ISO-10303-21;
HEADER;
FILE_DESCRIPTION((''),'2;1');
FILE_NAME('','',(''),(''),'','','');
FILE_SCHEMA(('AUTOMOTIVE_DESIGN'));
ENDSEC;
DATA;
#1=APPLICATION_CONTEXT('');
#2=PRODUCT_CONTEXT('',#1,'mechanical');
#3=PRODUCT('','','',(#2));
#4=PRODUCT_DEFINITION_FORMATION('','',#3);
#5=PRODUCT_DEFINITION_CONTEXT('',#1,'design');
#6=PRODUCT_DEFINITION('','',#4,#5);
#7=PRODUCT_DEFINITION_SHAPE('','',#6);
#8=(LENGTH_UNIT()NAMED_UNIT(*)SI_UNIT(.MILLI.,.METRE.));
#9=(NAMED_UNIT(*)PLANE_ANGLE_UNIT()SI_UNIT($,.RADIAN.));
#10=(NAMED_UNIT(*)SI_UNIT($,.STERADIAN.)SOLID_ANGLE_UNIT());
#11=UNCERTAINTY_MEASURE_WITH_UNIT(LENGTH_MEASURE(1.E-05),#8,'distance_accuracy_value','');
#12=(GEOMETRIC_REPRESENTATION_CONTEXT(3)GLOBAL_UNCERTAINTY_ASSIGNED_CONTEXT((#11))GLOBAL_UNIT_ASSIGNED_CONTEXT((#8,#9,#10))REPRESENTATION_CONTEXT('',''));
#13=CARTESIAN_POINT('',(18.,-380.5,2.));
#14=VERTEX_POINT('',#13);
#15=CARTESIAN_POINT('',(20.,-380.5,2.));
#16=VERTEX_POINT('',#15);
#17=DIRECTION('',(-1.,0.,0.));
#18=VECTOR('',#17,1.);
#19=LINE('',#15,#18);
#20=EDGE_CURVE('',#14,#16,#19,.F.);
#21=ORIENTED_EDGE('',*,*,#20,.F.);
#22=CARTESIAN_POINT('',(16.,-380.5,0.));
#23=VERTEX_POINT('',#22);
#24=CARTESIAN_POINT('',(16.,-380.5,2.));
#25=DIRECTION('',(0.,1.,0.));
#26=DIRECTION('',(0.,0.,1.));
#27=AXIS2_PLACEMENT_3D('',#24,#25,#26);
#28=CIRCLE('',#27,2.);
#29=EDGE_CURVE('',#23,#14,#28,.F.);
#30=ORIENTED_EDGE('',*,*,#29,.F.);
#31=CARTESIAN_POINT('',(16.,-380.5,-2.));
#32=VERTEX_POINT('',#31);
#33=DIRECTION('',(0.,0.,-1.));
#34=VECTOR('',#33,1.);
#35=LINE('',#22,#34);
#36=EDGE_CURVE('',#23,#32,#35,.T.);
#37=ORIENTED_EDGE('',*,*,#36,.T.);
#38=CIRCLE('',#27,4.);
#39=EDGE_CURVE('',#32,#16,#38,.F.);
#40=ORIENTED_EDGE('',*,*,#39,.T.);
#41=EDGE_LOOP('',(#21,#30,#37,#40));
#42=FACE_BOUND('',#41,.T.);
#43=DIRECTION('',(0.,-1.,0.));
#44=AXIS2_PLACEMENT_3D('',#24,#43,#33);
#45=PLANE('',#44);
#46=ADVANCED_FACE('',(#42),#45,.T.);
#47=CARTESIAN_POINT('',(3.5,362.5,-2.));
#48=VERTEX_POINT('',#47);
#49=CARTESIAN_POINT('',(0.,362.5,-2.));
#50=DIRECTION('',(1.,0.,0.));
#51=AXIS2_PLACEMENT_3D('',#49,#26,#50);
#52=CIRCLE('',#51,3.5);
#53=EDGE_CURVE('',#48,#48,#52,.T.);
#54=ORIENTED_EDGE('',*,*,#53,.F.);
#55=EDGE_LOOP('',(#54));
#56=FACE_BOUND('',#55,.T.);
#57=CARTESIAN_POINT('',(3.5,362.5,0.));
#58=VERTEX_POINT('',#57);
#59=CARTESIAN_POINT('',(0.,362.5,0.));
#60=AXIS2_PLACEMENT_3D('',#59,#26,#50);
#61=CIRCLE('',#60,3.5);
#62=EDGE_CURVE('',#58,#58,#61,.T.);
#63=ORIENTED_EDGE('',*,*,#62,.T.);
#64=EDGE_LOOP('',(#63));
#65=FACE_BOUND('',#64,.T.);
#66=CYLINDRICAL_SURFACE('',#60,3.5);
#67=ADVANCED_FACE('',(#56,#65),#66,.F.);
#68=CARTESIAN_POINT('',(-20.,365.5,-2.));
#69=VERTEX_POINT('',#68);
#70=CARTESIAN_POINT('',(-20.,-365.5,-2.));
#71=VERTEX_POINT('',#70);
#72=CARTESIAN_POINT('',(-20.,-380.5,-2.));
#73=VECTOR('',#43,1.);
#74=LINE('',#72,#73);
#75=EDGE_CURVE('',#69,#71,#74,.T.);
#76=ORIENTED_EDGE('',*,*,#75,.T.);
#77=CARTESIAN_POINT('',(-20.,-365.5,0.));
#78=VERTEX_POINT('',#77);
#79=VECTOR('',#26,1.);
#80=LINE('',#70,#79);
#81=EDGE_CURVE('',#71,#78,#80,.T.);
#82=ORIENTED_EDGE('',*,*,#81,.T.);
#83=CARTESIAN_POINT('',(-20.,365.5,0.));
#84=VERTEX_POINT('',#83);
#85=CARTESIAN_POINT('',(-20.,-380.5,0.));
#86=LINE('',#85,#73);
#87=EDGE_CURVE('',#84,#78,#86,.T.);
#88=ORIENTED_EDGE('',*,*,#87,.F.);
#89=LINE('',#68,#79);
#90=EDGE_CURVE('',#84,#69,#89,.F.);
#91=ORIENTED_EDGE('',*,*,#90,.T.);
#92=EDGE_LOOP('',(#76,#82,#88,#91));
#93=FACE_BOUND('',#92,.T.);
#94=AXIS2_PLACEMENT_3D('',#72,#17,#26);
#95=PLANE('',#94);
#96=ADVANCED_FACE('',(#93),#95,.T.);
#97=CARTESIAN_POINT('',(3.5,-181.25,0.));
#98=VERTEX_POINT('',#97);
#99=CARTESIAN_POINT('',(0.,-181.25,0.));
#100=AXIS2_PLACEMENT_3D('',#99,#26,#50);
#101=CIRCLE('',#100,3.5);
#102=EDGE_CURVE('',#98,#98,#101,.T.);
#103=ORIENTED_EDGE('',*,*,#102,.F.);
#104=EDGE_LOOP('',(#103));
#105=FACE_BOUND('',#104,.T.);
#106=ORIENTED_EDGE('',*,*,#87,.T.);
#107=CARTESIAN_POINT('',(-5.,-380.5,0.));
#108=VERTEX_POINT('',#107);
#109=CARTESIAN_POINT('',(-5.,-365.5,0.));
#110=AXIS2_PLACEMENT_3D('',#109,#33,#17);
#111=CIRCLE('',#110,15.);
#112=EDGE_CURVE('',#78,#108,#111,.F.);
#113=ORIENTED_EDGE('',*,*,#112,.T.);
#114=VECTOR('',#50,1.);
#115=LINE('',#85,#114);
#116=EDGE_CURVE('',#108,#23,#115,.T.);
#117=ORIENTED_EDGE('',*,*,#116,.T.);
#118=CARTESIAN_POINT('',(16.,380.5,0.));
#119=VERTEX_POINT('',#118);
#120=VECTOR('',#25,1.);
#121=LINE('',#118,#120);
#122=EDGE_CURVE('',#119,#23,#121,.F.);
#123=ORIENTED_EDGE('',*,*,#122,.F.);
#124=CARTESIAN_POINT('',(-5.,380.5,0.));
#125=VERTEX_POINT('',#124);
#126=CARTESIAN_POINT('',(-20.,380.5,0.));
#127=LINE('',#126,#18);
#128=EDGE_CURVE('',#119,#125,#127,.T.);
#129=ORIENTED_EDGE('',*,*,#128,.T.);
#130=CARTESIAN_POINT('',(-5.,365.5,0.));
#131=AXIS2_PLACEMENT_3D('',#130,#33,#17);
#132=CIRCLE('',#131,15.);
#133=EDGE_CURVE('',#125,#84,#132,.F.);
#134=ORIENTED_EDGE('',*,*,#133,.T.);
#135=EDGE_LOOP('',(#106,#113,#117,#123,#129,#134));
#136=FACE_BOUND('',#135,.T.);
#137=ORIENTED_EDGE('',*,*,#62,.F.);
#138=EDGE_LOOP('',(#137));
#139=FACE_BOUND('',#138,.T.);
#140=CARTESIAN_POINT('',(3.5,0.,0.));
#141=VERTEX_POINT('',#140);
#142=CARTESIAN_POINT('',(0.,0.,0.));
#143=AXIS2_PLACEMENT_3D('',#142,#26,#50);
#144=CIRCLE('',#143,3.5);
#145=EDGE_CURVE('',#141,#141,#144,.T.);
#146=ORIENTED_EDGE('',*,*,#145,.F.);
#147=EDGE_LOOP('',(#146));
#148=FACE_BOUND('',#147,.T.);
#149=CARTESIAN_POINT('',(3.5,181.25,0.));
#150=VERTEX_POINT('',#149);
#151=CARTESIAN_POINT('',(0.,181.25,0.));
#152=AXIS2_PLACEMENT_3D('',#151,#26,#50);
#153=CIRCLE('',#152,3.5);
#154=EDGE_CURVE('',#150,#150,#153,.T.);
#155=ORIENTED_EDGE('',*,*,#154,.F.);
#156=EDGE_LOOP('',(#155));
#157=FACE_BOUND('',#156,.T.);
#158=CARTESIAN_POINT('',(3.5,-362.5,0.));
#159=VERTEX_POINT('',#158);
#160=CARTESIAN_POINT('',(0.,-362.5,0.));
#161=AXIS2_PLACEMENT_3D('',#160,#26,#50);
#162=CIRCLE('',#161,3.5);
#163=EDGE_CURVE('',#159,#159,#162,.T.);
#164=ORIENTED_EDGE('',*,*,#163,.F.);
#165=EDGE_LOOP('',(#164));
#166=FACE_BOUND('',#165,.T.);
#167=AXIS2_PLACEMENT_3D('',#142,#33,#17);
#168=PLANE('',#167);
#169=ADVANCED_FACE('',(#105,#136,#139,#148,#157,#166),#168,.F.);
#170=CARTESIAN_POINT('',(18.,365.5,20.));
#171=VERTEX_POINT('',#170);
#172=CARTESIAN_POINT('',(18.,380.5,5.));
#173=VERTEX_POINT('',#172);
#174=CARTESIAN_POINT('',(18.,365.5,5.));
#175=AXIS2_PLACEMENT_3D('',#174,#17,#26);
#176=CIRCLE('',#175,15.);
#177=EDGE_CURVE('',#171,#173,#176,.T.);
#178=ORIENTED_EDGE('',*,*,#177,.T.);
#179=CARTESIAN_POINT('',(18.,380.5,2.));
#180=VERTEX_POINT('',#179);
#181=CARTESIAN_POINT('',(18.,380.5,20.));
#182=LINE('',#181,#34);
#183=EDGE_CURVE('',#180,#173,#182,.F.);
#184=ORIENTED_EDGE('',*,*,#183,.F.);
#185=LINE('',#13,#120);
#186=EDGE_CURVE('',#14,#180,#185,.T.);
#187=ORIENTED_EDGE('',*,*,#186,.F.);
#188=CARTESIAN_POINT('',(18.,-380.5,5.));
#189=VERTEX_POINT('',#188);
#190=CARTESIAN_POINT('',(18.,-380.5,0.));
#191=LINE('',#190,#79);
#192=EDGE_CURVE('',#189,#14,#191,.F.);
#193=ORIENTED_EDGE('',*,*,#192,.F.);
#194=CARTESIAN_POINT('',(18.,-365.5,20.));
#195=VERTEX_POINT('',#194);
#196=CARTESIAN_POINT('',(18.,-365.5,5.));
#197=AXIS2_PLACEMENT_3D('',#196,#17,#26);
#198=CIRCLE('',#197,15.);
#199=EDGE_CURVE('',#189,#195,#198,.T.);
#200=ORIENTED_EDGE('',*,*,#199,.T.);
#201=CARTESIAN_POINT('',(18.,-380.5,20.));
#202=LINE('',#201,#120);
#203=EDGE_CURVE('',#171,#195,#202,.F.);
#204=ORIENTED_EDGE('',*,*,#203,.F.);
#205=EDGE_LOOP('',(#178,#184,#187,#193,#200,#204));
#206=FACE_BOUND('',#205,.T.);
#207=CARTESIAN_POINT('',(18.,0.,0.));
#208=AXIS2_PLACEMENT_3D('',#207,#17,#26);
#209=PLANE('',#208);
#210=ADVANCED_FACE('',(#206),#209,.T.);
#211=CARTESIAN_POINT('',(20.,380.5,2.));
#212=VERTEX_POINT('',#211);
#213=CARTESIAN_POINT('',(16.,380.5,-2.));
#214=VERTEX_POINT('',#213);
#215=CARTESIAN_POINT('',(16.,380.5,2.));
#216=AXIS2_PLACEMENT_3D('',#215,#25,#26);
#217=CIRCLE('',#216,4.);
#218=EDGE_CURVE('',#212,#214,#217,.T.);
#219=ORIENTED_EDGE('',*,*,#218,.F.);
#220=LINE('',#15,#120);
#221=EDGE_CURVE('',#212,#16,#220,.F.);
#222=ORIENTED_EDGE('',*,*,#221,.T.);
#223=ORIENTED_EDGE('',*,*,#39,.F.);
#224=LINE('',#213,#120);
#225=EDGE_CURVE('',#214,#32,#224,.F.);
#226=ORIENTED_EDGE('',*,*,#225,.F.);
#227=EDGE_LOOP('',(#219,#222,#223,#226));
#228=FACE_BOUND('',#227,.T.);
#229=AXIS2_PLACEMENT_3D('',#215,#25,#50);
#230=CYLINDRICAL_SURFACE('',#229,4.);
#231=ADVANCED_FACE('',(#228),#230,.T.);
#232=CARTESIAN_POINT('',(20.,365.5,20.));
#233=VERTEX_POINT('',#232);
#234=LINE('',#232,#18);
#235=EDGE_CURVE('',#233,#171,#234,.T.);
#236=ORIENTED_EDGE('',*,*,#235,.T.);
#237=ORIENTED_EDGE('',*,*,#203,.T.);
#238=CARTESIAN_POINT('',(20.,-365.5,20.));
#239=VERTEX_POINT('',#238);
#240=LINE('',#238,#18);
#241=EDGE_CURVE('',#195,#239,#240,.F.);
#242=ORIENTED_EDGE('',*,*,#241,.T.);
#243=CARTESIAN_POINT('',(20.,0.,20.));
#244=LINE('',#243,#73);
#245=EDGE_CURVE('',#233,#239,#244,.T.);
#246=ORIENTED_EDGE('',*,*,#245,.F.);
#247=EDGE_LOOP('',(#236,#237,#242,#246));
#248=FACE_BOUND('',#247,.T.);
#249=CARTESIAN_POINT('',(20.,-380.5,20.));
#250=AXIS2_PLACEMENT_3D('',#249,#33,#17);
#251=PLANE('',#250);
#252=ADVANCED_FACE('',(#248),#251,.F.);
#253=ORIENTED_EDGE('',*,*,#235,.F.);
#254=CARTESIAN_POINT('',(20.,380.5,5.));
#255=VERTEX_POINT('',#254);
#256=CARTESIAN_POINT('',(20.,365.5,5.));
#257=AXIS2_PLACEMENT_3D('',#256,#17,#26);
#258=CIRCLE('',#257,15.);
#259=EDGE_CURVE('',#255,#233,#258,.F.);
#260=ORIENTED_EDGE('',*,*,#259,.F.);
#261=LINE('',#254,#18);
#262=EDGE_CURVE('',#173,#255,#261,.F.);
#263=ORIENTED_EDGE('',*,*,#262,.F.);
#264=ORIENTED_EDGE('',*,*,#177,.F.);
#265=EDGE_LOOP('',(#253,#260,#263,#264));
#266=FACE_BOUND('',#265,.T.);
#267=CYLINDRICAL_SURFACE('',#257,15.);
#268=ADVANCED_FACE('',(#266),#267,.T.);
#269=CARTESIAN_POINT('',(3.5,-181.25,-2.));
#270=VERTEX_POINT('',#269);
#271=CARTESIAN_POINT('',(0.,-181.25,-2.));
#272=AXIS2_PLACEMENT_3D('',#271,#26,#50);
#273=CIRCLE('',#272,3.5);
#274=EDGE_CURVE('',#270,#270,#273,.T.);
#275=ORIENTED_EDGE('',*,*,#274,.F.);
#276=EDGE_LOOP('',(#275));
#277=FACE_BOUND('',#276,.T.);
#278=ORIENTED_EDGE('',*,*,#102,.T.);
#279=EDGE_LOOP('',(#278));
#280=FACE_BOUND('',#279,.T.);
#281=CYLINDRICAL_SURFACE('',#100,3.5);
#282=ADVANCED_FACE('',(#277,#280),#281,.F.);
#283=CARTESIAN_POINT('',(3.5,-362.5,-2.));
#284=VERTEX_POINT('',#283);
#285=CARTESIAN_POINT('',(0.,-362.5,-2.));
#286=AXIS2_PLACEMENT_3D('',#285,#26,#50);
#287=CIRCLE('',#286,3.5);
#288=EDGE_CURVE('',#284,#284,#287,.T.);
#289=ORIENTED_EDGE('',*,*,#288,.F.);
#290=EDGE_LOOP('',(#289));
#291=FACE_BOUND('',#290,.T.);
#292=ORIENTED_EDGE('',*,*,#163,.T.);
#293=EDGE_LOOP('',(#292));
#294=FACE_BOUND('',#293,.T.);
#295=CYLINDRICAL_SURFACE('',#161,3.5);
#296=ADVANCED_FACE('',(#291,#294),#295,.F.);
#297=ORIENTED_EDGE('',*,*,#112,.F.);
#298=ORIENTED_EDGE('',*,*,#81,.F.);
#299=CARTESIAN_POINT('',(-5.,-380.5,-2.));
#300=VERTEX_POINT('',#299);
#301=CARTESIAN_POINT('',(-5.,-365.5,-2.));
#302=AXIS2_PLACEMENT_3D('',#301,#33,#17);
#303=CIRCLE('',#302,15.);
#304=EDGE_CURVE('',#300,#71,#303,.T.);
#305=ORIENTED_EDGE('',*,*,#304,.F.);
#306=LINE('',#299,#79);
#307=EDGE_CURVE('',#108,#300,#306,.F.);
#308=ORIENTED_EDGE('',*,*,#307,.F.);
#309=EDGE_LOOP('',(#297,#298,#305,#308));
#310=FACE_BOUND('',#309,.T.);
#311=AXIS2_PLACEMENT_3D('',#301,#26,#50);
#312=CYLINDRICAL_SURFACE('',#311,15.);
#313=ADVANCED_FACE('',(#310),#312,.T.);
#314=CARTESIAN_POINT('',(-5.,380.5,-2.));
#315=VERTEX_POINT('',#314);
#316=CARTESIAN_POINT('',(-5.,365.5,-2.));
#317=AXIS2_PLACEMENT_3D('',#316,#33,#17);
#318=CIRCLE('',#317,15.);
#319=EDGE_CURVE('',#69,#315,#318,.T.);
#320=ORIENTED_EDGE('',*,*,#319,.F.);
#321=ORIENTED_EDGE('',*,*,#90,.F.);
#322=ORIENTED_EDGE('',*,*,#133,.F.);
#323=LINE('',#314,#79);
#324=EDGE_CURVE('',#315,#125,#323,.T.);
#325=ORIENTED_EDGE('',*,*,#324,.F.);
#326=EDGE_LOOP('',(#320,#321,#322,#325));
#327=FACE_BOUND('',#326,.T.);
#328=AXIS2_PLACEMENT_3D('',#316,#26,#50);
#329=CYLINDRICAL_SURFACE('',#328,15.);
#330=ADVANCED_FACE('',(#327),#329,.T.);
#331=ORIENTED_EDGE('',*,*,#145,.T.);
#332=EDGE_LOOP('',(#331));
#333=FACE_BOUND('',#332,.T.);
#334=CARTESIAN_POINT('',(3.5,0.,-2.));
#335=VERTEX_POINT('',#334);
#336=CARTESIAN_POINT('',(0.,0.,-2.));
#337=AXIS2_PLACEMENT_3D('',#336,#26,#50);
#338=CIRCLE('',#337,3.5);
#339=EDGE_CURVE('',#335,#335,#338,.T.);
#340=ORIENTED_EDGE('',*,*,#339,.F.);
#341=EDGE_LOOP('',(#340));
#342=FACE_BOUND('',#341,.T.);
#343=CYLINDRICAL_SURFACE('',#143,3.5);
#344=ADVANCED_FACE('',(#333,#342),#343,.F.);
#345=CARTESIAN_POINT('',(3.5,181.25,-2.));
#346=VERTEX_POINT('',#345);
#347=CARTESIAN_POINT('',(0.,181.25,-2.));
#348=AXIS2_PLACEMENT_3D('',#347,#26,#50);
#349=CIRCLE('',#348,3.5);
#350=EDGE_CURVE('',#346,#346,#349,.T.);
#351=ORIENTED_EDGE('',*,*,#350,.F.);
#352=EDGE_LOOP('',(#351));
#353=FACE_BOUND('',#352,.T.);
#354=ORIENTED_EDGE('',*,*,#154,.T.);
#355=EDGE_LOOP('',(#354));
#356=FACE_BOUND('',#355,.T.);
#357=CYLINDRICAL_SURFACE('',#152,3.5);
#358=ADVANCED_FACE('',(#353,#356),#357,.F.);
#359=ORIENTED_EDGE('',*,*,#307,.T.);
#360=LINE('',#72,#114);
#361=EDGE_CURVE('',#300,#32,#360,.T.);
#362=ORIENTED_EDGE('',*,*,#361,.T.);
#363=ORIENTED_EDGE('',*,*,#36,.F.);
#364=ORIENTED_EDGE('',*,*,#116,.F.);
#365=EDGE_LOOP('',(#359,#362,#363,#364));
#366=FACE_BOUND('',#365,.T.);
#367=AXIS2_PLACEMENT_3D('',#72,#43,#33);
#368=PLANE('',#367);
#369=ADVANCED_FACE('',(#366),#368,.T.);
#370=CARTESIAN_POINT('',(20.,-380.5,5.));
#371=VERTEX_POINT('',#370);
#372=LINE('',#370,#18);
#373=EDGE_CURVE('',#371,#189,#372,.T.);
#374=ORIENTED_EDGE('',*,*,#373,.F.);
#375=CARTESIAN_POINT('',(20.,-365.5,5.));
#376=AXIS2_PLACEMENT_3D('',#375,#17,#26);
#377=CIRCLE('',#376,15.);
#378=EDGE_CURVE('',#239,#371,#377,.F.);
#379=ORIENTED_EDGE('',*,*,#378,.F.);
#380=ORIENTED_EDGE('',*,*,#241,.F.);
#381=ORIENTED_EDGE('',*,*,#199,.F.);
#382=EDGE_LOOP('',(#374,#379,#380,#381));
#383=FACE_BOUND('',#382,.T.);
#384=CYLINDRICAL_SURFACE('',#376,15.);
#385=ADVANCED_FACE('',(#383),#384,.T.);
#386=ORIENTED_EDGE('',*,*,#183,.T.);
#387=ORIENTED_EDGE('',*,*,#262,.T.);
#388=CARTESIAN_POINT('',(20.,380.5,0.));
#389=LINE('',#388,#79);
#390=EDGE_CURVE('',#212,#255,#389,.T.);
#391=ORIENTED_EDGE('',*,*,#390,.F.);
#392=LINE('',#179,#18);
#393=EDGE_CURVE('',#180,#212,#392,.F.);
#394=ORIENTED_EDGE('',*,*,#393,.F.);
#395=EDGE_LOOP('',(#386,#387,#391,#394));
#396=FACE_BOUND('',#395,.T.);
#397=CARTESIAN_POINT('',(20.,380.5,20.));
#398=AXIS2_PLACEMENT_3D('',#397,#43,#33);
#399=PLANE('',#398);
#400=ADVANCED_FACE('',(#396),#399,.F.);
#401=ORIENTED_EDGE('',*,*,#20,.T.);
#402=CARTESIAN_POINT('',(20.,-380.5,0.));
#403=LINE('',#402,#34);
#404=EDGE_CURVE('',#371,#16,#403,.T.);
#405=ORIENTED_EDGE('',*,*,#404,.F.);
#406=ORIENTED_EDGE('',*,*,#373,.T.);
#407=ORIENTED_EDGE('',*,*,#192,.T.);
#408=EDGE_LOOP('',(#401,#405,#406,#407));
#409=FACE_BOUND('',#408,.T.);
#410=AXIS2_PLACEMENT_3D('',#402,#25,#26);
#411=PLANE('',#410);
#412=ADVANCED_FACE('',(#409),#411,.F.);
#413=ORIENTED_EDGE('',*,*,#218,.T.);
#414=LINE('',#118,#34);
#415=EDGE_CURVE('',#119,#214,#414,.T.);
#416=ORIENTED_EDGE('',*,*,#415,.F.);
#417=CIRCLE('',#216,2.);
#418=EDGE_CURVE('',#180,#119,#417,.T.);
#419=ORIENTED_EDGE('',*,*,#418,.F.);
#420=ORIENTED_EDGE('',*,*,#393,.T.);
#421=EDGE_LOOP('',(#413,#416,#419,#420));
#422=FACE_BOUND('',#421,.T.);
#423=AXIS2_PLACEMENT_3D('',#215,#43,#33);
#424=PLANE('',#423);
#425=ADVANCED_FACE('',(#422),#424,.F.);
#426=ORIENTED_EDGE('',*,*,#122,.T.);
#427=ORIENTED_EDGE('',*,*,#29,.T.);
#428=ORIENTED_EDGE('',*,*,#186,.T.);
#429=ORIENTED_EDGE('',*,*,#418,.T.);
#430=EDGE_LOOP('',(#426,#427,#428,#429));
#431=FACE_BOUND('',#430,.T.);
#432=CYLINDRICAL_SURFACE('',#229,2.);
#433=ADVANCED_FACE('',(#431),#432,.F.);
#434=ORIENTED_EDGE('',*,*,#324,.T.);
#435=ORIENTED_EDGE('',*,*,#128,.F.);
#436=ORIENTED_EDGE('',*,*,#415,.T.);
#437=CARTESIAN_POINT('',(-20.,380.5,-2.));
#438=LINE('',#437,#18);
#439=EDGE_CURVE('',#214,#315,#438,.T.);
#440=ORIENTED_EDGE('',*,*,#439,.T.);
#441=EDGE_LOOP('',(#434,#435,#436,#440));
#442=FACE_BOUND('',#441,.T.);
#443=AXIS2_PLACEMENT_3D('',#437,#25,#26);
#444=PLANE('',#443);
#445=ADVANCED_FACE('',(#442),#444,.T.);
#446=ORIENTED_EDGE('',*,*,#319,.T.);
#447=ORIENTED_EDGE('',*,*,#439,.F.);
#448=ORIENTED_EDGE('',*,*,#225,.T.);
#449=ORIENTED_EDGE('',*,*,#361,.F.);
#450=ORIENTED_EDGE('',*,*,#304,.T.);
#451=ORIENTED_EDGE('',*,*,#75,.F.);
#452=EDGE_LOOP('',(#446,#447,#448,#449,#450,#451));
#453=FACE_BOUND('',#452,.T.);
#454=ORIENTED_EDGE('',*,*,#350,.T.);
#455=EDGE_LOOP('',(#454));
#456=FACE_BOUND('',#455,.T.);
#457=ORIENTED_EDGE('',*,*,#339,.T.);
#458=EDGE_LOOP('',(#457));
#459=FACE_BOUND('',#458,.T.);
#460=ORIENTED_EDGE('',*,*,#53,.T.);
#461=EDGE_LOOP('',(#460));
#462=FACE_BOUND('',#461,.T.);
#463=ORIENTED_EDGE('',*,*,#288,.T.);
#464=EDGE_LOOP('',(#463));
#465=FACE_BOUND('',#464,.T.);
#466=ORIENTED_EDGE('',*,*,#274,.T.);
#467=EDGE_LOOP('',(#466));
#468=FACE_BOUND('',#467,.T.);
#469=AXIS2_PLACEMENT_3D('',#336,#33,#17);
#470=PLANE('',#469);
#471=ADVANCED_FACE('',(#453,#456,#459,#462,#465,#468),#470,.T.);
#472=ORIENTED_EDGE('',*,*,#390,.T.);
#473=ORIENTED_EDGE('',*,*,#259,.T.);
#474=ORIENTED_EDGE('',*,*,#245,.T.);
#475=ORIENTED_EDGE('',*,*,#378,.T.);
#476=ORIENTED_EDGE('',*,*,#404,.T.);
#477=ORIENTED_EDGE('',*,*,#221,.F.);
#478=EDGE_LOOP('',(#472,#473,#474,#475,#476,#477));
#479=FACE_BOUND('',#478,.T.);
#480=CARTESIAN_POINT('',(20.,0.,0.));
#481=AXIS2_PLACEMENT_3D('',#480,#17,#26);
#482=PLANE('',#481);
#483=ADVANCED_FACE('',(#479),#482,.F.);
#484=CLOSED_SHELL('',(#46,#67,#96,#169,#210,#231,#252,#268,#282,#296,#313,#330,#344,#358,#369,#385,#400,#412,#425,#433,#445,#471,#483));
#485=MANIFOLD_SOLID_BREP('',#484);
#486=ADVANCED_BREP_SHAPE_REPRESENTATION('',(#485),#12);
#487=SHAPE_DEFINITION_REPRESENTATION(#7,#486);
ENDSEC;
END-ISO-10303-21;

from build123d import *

# Parameters (mm, degrees)
SKETCH2_W                    = 40
SKETCH2_H                    = 761
BASE_FLANGE1_DEPTH           = 2
EDGE_FLANGE1_STRIP_W         = 12
EDGE_FLANGE1_STRIP_H         = 2
EDGE_FLANGE1_STRIP_CUT_DEPTH = 761
EDGE_FLANGE1_DEPTH           = 761
FILLET1_R                    = 15
F_7_0_7_DIAMETER_HOLE1_D     = 7


# Sheet-metal steps are written as plain solids
with BuildPart() as part:
    # Sketch2 → Base-Flange1 (new body)
    with BuildSketch(Plane.XY):
        Rectangle(SKETCH2_W, SKETCH2_H)
    extrude(amount=-BASE_FLANGE1_DEPTH)

    # Edge-Flange1 strip (across the edge) → Edge-Flange1 strip cut (cut)
    with BuildSketch(Plane(origin=(20, -380.5, 0), x_dir=(-1, 0, 0), z_dir=(0, 1, 0))):
        with Locations((-2, -1)):
            Rectangle(EDGE_FLANGE1_STRIP_W, EDGE_FLANGE1_STRIP_H)
    extrude(amount=EDGE_FLANGE1_STRIP_CUT_DEPTH, mode=Mode.SUBTRACT)

    # Edge-Flange1 section (across the edge) → Edge-Flange1 (add)
    with BuildSketch(Plane(origin=(20, -380.5, 0), x_dir=(-1, 0, 0), z_dir=(0, 1, 0))):
        with BuildLine():
            Line((0, 2), (0, 20))
            Line((0, 20), (2, 20))
            Line((2, 20), (2, 2))
            ThreePointArc((2, 2), (2.585786438, 0.585786438), (4, 0))
            Line((4, 0), (4, -2))
            ThreePointArc((4, -2), (1.171572875, -0.828427125), (0, 2))
        make_face()
    extrude(amount=EDGE_FLANGE1_DEPTH)

    # Fillet1
    fillet1_edges = [part.edges().sort_by_distance(p)[0] for p in [
        (19, -380.5, 20),
        (19, 380.5, 20),
        (-20, -380.5, -1),
        (-20, 380.5, -1),
    ]]
    fillet(fillet1_edges, radius=FILLET1_R)

    # Ø7.0 (7) Diameter Hole1 (through all)
    with Locations(Plane.XY):
        with Locations((0, 362.5), (0, 181.25), (0, 0), (0, -181.25), (0, -362.5)):
            Hole(F_7_0_7_DIAMETER_HOLE1_D / 2)


solid = part.part
